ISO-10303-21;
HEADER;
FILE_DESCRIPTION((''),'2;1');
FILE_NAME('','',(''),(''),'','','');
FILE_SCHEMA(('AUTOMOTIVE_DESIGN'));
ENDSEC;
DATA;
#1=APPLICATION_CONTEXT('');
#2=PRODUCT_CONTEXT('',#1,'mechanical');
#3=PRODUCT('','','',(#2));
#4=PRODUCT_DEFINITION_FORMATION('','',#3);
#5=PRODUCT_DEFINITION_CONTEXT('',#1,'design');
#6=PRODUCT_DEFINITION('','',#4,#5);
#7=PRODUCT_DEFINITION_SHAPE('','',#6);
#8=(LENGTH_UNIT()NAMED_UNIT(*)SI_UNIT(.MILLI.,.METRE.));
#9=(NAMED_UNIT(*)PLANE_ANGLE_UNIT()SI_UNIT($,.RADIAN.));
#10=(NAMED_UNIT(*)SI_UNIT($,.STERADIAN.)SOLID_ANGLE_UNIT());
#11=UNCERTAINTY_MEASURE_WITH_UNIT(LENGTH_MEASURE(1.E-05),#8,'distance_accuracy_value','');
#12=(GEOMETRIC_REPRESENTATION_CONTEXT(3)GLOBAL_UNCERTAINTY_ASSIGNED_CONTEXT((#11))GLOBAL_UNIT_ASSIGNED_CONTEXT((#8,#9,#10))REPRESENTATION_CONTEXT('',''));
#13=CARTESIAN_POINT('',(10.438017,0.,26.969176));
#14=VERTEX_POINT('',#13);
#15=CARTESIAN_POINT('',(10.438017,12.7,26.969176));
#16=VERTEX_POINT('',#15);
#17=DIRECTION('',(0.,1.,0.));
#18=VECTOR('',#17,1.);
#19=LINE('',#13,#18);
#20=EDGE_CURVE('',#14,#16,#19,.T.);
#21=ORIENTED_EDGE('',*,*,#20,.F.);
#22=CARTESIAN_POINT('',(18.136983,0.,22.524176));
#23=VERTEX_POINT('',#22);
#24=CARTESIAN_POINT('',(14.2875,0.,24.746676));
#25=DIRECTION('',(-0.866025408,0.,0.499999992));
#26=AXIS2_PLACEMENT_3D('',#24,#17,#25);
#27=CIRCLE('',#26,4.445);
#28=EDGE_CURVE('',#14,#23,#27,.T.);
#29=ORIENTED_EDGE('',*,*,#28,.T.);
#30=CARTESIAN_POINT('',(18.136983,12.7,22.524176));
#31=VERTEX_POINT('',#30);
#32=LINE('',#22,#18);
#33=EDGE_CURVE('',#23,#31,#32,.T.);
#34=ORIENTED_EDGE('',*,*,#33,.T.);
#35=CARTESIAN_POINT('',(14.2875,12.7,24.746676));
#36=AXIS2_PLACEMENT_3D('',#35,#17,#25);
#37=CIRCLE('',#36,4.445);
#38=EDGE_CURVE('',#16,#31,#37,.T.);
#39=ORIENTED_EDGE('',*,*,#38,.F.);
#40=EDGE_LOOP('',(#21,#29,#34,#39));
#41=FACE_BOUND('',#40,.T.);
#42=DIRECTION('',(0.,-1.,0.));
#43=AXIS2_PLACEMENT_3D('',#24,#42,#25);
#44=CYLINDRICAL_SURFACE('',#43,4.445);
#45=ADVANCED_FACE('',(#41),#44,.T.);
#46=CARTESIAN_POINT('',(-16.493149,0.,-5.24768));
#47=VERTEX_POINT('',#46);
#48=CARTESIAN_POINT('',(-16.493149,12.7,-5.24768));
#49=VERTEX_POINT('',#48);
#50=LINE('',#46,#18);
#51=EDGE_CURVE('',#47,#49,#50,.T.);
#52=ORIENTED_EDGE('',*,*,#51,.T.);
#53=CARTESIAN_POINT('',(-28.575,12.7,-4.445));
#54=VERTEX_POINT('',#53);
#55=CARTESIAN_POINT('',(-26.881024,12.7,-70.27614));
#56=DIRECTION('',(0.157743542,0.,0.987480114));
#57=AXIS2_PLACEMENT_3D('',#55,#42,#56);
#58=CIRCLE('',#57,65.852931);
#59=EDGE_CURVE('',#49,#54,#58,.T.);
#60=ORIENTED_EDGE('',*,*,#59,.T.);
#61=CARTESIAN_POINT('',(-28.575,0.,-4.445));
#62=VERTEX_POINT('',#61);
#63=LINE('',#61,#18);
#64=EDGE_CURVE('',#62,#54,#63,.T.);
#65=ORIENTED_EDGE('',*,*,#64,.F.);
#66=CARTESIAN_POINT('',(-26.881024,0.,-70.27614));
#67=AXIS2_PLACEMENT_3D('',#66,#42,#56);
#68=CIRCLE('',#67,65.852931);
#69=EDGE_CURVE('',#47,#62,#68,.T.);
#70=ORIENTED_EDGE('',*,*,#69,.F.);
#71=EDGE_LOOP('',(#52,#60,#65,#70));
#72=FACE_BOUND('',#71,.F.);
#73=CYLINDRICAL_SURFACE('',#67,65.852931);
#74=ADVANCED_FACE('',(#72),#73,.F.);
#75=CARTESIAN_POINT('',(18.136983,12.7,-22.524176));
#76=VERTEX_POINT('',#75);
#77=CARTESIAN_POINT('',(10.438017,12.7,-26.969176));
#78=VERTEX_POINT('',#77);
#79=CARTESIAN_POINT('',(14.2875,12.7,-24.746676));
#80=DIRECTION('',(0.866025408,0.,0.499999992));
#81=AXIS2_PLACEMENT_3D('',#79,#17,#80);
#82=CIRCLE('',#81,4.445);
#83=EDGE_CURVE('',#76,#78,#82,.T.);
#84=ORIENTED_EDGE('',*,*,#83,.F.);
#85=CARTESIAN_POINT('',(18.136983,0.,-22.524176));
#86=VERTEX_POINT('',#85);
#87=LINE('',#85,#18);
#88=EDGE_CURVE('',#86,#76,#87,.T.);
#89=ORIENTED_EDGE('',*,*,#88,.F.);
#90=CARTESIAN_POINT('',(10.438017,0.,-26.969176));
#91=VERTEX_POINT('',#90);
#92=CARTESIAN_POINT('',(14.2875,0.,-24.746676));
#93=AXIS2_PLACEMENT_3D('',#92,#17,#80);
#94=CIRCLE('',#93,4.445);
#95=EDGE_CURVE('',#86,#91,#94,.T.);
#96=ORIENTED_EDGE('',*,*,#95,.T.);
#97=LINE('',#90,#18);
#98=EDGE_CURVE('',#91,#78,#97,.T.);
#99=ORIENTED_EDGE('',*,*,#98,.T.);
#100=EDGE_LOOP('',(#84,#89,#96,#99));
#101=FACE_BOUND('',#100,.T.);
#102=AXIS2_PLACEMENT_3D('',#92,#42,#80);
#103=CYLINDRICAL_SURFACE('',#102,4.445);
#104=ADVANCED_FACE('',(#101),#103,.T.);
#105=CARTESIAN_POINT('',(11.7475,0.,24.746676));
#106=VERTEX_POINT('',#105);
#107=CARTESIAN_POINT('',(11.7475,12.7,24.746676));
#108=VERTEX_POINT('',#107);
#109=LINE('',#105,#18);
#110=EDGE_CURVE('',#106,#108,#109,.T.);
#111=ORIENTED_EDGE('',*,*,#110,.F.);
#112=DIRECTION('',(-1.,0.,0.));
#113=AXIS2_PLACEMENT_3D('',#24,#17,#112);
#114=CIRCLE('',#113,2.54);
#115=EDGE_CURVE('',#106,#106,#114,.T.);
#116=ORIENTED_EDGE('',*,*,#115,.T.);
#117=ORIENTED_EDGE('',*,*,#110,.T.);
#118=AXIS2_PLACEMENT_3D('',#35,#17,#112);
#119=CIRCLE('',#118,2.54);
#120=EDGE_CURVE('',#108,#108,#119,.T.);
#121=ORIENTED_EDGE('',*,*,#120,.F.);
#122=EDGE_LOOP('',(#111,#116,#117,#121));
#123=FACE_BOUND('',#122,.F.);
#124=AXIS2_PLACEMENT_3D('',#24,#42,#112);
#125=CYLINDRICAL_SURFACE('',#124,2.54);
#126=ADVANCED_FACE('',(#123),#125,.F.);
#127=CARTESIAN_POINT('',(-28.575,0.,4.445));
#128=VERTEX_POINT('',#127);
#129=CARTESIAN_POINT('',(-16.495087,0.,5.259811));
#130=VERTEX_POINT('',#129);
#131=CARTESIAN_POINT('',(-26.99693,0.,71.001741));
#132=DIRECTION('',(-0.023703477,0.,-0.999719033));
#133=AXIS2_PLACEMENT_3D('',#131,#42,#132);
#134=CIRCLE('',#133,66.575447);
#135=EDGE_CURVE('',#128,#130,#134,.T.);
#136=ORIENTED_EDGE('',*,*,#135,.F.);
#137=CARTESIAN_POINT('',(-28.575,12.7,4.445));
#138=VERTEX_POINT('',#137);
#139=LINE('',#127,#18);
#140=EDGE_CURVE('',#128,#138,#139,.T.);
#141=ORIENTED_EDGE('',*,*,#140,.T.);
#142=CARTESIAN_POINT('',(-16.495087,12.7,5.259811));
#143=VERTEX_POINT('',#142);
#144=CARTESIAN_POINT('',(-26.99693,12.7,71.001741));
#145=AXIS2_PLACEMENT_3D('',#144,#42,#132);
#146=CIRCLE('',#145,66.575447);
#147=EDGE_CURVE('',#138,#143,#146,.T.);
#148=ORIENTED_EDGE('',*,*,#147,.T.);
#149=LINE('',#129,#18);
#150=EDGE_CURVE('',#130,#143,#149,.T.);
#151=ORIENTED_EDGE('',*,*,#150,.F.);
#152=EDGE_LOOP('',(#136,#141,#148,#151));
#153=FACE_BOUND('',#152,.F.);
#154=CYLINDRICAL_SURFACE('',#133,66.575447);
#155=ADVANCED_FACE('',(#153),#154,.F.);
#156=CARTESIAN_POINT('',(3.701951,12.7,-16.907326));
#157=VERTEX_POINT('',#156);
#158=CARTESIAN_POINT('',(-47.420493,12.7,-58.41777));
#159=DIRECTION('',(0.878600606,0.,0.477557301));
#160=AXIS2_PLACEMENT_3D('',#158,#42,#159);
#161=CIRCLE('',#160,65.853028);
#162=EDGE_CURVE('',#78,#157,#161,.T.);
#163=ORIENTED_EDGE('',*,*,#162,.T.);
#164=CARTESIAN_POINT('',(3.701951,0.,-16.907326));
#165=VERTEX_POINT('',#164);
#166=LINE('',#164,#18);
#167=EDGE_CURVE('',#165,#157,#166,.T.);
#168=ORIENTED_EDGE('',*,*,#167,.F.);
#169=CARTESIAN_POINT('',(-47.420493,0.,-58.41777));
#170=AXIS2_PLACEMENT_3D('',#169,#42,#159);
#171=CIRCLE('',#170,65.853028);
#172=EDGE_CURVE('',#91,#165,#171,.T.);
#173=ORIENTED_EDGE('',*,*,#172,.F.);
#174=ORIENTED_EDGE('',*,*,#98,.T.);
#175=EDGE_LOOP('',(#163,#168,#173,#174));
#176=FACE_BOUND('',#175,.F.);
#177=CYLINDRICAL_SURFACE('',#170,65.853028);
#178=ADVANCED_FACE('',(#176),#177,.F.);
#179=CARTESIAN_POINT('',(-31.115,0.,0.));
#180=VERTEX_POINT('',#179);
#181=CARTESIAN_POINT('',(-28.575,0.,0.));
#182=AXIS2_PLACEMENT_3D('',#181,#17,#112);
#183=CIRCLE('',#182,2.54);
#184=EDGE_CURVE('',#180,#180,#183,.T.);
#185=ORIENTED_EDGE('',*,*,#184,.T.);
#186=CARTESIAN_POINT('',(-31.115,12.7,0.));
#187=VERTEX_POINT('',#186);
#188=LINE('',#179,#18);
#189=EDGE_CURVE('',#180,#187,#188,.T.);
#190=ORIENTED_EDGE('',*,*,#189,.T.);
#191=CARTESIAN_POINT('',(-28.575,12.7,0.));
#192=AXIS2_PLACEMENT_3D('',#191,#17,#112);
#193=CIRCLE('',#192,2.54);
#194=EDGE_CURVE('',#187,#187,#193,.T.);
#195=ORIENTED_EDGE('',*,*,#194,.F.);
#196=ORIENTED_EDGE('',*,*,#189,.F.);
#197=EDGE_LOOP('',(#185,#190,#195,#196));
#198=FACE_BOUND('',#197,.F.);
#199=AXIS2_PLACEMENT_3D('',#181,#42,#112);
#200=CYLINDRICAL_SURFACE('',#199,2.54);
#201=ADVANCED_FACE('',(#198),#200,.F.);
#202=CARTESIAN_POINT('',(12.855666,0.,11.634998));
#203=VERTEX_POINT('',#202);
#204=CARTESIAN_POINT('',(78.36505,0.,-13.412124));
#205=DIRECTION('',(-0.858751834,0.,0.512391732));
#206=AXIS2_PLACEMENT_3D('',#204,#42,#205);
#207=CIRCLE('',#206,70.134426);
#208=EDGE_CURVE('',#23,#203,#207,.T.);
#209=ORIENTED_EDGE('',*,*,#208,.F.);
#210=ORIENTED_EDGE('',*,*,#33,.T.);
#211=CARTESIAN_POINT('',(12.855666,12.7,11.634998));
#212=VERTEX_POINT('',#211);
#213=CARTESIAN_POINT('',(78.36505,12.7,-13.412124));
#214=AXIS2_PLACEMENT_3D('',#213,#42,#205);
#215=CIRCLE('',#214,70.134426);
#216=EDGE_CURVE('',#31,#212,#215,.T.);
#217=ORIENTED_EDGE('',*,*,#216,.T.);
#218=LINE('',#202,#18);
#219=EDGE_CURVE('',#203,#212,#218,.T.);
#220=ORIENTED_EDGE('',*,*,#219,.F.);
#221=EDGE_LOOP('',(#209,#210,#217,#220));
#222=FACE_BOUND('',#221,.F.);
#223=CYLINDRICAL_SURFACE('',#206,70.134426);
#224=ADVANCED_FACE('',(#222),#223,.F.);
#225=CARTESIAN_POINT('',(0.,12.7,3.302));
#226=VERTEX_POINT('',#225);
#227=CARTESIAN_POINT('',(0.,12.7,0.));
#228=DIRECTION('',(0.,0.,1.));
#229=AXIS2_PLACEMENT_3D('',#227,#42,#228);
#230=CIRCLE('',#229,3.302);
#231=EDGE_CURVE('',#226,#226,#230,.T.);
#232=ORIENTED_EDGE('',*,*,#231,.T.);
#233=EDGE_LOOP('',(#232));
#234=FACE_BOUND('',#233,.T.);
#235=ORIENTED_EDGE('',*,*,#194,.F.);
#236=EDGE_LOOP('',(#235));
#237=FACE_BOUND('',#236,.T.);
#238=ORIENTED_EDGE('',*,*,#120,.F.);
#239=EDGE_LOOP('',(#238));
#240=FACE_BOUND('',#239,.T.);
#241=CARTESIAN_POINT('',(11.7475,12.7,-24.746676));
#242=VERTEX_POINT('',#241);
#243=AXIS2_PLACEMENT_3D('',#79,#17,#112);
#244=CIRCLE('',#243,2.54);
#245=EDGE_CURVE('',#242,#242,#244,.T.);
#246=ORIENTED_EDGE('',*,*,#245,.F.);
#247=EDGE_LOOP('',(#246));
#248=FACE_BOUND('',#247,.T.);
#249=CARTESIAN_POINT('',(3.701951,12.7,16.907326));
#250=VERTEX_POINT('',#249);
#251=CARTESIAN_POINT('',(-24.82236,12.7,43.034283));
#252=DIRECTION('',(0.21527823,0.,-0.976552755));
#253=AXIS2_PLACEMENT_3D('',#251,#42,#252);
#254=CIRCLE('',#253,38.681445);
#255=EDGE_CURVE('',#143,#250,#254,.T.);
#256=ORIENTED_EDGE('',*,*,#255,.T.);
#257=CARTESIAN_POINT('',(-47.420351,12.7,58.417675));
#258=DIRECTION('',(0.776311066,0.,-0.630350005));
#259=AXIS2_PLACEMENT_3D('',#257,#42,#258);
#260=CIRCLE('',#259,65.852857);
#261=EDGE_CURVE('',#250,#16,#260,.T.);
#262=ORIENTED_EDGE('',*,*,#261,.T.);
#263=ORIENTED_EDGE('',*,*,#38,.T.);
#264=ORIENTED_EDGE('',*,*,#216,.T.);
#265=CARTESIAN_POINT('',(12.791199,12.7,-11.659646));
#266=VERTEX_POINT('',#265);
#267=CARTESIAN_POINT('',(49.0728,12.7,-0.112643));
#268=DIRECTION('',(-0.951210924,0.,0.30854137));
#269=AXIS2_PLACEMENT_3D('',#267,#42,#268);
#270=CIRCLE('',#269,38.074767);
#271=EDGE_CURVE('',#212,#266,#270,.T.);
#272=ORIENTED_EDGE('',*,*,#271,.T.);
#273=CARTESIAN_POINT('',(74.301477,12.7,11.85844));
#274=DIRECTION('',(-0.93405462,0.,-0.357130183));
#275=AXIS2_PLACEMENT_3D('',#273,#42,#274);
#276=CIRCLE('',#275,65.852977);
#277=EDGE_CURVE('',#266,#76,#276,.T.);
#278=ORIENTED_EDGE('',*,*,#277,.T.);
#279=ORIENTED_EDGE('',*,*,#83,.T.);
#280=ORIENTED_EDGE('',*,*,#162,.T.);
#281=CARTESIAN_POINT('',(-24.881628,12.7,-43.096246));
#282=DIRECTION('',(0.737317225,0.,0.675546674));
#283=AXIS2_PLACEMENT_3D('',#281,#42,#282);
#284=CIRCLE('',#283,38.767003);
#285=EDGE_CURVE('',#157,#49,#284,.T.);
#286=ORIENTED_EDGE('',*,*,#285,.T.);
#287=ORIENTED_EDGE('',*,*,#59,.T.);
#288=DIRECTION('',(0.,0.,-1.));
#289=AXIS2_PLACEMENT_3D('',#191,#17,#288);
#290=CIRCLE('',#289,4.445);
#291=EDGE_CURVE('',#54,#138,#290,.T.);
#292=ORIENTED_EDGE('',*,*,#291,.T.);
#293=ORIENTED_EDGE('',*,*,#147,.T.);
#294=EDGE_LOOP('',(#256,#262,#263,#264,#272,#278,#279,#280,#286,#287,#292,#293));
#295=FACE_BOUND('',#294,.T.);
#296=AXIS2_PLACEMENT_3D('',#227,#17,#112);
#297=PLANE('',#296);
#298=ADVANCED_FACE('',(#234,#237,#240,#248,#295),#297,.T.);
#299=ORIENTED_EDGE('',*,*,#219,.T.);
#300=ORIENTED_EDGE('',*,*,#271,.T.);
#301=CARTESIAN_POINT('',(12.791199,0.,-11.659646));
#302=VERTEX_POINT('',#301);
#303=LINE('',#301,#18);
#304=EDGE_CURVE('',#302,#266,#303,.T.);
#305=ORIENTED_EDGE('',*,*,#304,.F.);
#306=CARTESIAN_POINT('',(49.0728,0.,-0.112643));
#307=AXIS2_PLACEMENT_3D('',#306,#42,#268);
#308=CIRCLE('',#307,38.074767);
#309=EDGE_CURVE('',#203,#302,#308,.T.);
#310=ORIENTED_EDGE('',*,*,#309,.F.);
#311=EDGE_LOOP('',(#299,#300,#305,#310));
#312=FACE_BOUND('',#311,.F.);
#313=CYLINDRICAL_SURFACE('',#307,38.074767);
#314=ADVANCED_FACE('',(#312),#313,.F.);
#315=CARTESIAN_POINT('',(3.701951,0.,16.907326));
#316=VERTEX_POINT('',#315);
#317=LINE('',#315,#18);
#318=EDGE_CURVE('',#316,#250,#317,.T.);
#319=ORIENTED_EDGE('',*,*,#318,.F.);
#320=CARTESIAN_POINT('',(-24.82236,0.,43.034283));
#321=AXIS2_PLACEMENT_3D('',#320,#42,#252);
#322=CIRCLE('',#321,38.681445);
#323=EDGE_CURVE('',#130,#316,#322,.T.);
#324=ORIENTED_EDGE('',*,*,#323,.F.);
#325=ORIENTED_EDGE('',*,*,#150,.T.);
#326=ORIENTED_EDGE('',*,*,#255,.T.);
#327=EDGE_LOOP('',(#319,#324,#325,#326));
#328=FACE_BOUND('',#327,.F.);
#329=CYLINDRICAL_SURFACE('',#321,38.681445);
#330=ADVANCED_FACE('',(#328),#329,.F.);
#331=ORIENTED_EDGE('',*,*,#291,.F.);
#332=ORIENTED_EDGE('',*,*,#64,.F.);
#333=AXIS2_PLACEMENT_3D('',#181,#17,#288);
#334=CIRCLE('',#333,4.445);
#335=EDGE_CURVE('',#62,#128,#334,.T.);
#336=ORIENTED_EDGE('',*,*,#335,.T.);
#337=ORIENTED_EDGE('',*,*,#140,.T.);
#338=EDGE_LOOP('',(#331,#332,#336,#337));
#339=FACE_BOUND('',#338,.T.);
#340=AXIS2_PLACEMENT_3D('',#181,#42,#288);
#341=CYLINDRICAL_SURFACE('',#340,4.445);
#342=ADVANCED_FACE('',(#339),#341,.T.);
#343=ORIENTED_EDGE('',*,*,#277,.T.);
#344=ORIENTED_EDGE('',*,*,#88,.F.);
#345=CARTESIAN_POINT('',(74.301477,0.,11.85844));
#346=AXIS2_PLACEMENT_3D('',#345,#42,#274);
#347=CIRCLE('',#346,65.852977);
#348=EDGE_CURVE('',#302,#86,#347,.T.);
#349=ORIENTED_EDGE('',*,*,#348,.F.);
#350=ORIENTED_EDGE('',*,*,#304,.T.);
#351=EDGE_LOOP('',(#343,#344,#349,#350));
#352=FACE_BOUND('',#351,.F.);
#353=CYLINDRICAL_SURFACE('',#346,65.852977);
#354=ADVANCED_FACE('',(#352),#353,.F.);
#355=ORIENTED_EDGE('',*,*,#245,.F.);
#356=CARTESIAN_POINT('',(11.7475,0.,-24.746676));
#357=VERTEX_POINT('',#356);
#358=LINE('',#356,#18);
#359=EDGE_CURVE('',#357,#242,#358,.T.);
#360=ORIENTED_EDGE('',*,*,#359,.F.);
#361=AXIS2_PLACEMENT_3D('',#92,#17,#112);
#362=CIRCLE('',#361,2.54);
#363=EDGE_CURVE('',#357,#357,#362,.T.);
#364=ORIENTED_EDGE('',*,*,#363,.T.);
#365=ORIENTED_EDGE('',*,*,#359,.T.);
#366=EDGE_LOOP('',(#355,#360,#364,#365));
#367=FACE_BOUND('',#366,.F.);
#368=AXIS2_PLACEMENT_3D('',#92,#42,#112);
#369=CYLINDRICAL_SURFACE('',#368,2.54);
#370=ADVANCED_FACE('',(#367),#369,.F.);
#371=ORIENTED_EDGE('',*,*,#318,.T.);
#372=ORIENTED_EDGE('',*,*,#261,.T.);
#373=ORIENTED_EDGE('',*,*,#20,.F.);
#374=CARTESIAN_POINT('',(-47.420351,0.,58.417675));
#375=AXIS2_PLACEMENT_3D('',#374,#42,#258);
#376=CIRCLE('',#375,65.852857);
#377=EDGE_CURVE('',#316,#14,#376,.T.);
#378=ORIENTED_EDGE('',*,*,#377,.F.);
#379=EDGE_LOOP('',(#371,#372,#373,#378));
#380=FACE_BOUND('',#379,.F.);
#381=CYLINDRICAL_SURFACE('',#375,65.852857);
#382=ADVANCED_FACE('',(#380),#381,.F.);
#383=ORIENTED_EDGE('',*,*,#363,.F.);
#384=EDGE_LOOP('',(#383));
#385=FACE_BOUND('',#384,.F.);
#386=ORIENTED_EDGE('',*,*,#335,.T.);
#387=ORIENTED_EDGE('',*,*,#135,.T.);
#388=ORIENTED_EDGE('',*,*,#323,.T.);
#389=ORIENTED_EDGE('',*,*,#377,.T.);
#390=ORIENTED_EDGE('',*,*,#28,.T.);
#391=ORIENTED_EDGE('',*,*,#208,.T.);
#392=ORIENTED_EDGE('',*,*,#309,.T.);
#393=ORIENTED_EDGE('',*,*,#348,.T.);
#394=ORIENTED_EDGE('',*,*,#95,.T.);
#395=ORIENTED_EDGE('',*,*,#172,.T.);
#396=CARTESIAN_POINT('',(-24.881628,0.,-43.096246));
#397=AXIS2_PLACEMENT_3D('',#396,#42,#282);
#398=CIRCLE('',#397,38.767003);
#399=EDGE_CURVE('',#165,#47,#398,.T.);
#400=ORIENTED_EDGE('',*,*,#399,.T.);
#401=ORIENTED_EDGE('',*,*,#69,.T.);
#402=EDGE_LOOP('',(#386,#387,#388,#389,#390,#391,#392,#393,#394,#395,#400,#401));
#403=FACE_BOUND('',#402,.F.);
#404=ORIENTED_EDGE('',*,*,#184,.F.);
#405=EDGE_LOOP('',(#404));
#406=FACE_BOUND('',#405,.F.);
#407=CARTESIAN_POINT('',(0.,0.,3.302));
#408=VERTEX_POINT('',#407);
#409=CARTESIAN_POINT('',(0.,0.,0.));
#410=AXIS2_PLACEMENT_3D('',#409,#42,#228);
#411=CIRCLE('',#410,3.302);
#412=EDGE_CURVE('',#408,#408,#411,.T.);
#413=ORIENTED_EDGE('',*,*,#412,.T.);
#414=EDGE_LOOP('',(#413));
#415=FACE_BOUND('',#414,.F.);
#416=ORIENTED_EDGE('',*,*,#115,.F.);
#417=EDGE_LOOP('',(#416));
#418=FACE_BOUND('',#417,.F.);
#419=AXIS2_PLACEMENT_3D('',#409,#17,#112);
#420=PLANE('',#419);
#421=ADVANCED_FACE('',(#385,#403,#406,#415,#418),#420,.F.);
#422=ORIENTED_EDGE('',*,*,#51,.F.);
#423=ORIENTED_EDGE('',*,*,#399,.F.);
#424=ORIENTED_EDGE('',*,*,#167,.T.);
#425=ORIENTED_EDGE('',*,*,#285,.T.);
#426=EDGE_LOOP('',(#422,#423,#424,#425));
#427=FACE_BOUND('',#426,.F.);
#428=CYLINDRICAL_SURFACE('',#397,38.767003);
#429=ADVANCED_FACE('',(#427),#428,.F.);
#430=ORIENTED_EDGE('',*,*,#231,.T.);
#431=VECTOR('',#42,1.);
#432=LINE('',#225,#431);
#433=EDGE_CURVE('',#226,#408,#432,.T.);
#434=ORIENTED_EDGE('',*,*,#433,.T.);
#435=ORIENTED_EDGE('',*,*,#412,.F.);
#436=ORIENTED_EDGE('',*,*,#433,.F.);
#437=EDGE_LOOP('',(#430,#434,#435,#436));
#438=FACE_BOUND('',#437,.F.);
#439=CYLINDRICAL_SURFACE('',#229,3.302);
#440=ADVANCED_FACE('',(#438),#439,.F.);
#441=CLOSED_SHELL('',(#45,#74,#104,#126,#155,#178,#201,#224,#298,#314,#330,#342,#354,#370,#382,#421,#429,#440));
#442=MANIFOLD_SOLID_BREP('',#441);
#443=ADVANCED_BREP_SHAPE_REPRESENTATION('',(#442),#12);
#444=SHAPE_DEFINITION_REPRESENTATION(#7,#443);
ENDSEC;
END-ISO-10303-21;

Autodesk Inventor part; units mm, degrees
ref_plane "YZ Plane" through (0, 0, 0) normal (1, 0, 0) x (0, 1, 0)
ref_plane "XZ Plane" through (0, 0, 0) normal (0, 1, 0) x (-1, 0, 0)
ref_plane "XY Plane" through (0, 0, 0) normal (0, 0, 1) x (1, 0, 0)
sketch "Sketch1" plane through (0, 0, 0) normal (0, 1, 0) x (-1, 0, 0)
  line L0 (0, 0) -> (28.575, 0)
  line L1 (28.575, 0) -> (0, 0)
  line L2 (0, 0) -> (-14.2875, -24.746676)
  line L3 (0, 0) -> (28.575, 0) construction
  line L4 (0, 0) -> (-14.2875, 24.746676)
  line L5 (0, 0) -> (28.575, 0) construction
  circle A0 centre (28.575, 0) radius 2.54
  circle A1 centre (-14.2875, -24.746676) radius 2.54
  circle A2 centre (-14.2875, 24.746676) radius 2.54
  circle A3 centre (0, 0) radius 3.175
  dimension "d0" = 28.575
  dimension "d1" = 28.575
  dimension "d2" = 120
  dimension "d3" = 28.575
  dimension "d4" = 120
  dimension "d5" = 5.08
  dimension "d6" = 5.08
  dimension "d7" = 5.08
  dimension "d9" = 6.35
sketch "Sketch2" plane through (0, 0, 0) normal (0, 1, 0) x (-1, 0, 0)
  circle A0 centre (28.575, 0) radius 2.54
  circle A1 centre (-14.2875, -24.746676) radius 2.54
  circle A2 centre (-14.2875, 24.746676) radius 2.54
  circle A3 centre (28.575, 0) radius 4.445
  circle A4 centre (-14.2875, -24.746676) radius 4.445
  circle A5 centre (-14.2875, 24.746676) radius 4.445
  circle A6 centre (0, 0) radius 6.35
  circle A7 centre (0, 0) radius 9.525
  line L0 (28.575, 4.445) -> (28.575, -4.445)
  line L1 (-14.2875, 24.746676) -> (0, 0)
  line L2 (0, 0) -> (-14.2875, 24.746676)
  line L3 (-14.2875, 24.746676) -> (-10.438017, 26.969176)
  line L4 (-14.2875, 24.746676) -> (-18.136983, 22.524176)
  line L5 (0, 0) -> (-14.2875, -24.746676)
  line L6 (-10.438017, -26.969176) -> (-14.2875, -24.746676)
  line L7 (-18.136983, -22.524176) -> (-14.2875, -24.746676)
  arc A8 (4.7625, 8.248892) -> (28.575, 4.445) centre (26.99693, 71.00172) ccw
  arc A9 (28.575, -4.445) -> (4.7625, -8.248892) centre (26.881025, -70.276152) ccw
  arc A10 (4.7625, -8.248892) -> (-10.438017, -26.969176) centre (47.42042, -58.417726) ccw
  arc A11 (-18.136983, -22.524176) -> (-9.525, 0) centre (-74.301445, 11.858426) ccw
  arc A12 (-9.525, 0) -> (-18.136983, 22.524176) centre (-78.365024, -13.41211) ccw
  arc A13 (-10.438017, 26.969176) -> (4.7625, 8.248892) centre (47.42042, 58.417726) ccw
  arc A14 (-3.701951, 16.907326) -> (16.495087, 5.259811) centre (24.822359, 43.03428) ccw
  arc A15 (16.493149, -5.24768) -> (-3.701951, -16.907326) centre (24.881633, -43.096252) ccw
  line L8 (-9.525, 0) -> (-10.9982, 0)
  arc A16 (-12.791199, -11.659646) -> (-12.855666, 11.634998) centre (-49.072802, -0.112643) ccw
  dimension "d10" = 8.89
  dimension "d11" = 8.89
  dimension "d12" = 8.89
  dimension "d13" = 12.7
  dimension "d14" = 19.05
  dimension "d15" = 1.4732
sketch "Sketch2 outline for Extrusion1" plane through (0, 0, 0) normal (0, 1, 0) x (-1, 0, 0)
  arc A0 (-10.438017, 26.969176) -> (-18.136983, 22.524176) centre (-14.2875, 24.746676) ccw
  arc A1 (-3.701951, 16.907326) -> (-10.438017, 26.969176) centre (47.42042, 58.417726) cw
  arc A2 (-18.136983, 22.524176) -> (-12.855666, 11.634998) centre (-78.365024, -13.41211) cw
  arc A3 (16.495087, 5.259811) -> (-3.701951, 16.907326) centre (24.822359, 43.03428) cw
  arc A4 (-12.855666, 11.634998) -> (-12.791199, -11.659646) centre (-49.072802, -0.112643) cw
  arc A5 (28.575, 4.445) -> (16.495087, 5.259811) centre (26.99693, 71.00172) cw
  arc A6 (-12.791199, -11.659646) -> (-18.136983, -22.524176) centre (-74.301445, 11.858426) cw
  arc A7 (28.575, -4.445) -> (28.575, 4.445) centre (28.575, 0) ccw
  arc A8 (-18.136983, -22.524176) -> (-10.438017, -26.969176) centre (-14.2875, -24.746676) ccw
  arc A9 (16.493149, -5.24768) -> (28.575, -4.445) centre (26.881025, -70.276152) cw
  arc A10 (-10.438017, -26.969176) -> (-3.701951, -16.907326) centre (47.42042, -58.417726) cw
  arc A11 (-3.701951, -16.907326) -> (16.493149, -5.24768) centre (24.881633, -43.096252) cw
  circle A12 centre (-14.2875, -24.746676) radius 2.54
  circle A13 centre (-14.2875, 24.746676) radius 2.54
  circle A14 centre (28.575, 0) radius 2.54
extrude "Extrusion1" add sketch "Sketch2 outline for Extrusion1" along normal blind 12.7
hole "Hole1" at (0, 0, 0) direction (0, 1, 0) diameter 6.35 end through all
sketch "Sketch3" plane through (0, 12.7, 0) normal (0, 1, 0) x (1, 0, 0)
  circle A0 centre (0, 0) radius 3.175 projected
hole "Hole2" at (0, 12.7, 0) direction (0, -1, 0) diameter 6.604 end through all
properties part number "stability"
